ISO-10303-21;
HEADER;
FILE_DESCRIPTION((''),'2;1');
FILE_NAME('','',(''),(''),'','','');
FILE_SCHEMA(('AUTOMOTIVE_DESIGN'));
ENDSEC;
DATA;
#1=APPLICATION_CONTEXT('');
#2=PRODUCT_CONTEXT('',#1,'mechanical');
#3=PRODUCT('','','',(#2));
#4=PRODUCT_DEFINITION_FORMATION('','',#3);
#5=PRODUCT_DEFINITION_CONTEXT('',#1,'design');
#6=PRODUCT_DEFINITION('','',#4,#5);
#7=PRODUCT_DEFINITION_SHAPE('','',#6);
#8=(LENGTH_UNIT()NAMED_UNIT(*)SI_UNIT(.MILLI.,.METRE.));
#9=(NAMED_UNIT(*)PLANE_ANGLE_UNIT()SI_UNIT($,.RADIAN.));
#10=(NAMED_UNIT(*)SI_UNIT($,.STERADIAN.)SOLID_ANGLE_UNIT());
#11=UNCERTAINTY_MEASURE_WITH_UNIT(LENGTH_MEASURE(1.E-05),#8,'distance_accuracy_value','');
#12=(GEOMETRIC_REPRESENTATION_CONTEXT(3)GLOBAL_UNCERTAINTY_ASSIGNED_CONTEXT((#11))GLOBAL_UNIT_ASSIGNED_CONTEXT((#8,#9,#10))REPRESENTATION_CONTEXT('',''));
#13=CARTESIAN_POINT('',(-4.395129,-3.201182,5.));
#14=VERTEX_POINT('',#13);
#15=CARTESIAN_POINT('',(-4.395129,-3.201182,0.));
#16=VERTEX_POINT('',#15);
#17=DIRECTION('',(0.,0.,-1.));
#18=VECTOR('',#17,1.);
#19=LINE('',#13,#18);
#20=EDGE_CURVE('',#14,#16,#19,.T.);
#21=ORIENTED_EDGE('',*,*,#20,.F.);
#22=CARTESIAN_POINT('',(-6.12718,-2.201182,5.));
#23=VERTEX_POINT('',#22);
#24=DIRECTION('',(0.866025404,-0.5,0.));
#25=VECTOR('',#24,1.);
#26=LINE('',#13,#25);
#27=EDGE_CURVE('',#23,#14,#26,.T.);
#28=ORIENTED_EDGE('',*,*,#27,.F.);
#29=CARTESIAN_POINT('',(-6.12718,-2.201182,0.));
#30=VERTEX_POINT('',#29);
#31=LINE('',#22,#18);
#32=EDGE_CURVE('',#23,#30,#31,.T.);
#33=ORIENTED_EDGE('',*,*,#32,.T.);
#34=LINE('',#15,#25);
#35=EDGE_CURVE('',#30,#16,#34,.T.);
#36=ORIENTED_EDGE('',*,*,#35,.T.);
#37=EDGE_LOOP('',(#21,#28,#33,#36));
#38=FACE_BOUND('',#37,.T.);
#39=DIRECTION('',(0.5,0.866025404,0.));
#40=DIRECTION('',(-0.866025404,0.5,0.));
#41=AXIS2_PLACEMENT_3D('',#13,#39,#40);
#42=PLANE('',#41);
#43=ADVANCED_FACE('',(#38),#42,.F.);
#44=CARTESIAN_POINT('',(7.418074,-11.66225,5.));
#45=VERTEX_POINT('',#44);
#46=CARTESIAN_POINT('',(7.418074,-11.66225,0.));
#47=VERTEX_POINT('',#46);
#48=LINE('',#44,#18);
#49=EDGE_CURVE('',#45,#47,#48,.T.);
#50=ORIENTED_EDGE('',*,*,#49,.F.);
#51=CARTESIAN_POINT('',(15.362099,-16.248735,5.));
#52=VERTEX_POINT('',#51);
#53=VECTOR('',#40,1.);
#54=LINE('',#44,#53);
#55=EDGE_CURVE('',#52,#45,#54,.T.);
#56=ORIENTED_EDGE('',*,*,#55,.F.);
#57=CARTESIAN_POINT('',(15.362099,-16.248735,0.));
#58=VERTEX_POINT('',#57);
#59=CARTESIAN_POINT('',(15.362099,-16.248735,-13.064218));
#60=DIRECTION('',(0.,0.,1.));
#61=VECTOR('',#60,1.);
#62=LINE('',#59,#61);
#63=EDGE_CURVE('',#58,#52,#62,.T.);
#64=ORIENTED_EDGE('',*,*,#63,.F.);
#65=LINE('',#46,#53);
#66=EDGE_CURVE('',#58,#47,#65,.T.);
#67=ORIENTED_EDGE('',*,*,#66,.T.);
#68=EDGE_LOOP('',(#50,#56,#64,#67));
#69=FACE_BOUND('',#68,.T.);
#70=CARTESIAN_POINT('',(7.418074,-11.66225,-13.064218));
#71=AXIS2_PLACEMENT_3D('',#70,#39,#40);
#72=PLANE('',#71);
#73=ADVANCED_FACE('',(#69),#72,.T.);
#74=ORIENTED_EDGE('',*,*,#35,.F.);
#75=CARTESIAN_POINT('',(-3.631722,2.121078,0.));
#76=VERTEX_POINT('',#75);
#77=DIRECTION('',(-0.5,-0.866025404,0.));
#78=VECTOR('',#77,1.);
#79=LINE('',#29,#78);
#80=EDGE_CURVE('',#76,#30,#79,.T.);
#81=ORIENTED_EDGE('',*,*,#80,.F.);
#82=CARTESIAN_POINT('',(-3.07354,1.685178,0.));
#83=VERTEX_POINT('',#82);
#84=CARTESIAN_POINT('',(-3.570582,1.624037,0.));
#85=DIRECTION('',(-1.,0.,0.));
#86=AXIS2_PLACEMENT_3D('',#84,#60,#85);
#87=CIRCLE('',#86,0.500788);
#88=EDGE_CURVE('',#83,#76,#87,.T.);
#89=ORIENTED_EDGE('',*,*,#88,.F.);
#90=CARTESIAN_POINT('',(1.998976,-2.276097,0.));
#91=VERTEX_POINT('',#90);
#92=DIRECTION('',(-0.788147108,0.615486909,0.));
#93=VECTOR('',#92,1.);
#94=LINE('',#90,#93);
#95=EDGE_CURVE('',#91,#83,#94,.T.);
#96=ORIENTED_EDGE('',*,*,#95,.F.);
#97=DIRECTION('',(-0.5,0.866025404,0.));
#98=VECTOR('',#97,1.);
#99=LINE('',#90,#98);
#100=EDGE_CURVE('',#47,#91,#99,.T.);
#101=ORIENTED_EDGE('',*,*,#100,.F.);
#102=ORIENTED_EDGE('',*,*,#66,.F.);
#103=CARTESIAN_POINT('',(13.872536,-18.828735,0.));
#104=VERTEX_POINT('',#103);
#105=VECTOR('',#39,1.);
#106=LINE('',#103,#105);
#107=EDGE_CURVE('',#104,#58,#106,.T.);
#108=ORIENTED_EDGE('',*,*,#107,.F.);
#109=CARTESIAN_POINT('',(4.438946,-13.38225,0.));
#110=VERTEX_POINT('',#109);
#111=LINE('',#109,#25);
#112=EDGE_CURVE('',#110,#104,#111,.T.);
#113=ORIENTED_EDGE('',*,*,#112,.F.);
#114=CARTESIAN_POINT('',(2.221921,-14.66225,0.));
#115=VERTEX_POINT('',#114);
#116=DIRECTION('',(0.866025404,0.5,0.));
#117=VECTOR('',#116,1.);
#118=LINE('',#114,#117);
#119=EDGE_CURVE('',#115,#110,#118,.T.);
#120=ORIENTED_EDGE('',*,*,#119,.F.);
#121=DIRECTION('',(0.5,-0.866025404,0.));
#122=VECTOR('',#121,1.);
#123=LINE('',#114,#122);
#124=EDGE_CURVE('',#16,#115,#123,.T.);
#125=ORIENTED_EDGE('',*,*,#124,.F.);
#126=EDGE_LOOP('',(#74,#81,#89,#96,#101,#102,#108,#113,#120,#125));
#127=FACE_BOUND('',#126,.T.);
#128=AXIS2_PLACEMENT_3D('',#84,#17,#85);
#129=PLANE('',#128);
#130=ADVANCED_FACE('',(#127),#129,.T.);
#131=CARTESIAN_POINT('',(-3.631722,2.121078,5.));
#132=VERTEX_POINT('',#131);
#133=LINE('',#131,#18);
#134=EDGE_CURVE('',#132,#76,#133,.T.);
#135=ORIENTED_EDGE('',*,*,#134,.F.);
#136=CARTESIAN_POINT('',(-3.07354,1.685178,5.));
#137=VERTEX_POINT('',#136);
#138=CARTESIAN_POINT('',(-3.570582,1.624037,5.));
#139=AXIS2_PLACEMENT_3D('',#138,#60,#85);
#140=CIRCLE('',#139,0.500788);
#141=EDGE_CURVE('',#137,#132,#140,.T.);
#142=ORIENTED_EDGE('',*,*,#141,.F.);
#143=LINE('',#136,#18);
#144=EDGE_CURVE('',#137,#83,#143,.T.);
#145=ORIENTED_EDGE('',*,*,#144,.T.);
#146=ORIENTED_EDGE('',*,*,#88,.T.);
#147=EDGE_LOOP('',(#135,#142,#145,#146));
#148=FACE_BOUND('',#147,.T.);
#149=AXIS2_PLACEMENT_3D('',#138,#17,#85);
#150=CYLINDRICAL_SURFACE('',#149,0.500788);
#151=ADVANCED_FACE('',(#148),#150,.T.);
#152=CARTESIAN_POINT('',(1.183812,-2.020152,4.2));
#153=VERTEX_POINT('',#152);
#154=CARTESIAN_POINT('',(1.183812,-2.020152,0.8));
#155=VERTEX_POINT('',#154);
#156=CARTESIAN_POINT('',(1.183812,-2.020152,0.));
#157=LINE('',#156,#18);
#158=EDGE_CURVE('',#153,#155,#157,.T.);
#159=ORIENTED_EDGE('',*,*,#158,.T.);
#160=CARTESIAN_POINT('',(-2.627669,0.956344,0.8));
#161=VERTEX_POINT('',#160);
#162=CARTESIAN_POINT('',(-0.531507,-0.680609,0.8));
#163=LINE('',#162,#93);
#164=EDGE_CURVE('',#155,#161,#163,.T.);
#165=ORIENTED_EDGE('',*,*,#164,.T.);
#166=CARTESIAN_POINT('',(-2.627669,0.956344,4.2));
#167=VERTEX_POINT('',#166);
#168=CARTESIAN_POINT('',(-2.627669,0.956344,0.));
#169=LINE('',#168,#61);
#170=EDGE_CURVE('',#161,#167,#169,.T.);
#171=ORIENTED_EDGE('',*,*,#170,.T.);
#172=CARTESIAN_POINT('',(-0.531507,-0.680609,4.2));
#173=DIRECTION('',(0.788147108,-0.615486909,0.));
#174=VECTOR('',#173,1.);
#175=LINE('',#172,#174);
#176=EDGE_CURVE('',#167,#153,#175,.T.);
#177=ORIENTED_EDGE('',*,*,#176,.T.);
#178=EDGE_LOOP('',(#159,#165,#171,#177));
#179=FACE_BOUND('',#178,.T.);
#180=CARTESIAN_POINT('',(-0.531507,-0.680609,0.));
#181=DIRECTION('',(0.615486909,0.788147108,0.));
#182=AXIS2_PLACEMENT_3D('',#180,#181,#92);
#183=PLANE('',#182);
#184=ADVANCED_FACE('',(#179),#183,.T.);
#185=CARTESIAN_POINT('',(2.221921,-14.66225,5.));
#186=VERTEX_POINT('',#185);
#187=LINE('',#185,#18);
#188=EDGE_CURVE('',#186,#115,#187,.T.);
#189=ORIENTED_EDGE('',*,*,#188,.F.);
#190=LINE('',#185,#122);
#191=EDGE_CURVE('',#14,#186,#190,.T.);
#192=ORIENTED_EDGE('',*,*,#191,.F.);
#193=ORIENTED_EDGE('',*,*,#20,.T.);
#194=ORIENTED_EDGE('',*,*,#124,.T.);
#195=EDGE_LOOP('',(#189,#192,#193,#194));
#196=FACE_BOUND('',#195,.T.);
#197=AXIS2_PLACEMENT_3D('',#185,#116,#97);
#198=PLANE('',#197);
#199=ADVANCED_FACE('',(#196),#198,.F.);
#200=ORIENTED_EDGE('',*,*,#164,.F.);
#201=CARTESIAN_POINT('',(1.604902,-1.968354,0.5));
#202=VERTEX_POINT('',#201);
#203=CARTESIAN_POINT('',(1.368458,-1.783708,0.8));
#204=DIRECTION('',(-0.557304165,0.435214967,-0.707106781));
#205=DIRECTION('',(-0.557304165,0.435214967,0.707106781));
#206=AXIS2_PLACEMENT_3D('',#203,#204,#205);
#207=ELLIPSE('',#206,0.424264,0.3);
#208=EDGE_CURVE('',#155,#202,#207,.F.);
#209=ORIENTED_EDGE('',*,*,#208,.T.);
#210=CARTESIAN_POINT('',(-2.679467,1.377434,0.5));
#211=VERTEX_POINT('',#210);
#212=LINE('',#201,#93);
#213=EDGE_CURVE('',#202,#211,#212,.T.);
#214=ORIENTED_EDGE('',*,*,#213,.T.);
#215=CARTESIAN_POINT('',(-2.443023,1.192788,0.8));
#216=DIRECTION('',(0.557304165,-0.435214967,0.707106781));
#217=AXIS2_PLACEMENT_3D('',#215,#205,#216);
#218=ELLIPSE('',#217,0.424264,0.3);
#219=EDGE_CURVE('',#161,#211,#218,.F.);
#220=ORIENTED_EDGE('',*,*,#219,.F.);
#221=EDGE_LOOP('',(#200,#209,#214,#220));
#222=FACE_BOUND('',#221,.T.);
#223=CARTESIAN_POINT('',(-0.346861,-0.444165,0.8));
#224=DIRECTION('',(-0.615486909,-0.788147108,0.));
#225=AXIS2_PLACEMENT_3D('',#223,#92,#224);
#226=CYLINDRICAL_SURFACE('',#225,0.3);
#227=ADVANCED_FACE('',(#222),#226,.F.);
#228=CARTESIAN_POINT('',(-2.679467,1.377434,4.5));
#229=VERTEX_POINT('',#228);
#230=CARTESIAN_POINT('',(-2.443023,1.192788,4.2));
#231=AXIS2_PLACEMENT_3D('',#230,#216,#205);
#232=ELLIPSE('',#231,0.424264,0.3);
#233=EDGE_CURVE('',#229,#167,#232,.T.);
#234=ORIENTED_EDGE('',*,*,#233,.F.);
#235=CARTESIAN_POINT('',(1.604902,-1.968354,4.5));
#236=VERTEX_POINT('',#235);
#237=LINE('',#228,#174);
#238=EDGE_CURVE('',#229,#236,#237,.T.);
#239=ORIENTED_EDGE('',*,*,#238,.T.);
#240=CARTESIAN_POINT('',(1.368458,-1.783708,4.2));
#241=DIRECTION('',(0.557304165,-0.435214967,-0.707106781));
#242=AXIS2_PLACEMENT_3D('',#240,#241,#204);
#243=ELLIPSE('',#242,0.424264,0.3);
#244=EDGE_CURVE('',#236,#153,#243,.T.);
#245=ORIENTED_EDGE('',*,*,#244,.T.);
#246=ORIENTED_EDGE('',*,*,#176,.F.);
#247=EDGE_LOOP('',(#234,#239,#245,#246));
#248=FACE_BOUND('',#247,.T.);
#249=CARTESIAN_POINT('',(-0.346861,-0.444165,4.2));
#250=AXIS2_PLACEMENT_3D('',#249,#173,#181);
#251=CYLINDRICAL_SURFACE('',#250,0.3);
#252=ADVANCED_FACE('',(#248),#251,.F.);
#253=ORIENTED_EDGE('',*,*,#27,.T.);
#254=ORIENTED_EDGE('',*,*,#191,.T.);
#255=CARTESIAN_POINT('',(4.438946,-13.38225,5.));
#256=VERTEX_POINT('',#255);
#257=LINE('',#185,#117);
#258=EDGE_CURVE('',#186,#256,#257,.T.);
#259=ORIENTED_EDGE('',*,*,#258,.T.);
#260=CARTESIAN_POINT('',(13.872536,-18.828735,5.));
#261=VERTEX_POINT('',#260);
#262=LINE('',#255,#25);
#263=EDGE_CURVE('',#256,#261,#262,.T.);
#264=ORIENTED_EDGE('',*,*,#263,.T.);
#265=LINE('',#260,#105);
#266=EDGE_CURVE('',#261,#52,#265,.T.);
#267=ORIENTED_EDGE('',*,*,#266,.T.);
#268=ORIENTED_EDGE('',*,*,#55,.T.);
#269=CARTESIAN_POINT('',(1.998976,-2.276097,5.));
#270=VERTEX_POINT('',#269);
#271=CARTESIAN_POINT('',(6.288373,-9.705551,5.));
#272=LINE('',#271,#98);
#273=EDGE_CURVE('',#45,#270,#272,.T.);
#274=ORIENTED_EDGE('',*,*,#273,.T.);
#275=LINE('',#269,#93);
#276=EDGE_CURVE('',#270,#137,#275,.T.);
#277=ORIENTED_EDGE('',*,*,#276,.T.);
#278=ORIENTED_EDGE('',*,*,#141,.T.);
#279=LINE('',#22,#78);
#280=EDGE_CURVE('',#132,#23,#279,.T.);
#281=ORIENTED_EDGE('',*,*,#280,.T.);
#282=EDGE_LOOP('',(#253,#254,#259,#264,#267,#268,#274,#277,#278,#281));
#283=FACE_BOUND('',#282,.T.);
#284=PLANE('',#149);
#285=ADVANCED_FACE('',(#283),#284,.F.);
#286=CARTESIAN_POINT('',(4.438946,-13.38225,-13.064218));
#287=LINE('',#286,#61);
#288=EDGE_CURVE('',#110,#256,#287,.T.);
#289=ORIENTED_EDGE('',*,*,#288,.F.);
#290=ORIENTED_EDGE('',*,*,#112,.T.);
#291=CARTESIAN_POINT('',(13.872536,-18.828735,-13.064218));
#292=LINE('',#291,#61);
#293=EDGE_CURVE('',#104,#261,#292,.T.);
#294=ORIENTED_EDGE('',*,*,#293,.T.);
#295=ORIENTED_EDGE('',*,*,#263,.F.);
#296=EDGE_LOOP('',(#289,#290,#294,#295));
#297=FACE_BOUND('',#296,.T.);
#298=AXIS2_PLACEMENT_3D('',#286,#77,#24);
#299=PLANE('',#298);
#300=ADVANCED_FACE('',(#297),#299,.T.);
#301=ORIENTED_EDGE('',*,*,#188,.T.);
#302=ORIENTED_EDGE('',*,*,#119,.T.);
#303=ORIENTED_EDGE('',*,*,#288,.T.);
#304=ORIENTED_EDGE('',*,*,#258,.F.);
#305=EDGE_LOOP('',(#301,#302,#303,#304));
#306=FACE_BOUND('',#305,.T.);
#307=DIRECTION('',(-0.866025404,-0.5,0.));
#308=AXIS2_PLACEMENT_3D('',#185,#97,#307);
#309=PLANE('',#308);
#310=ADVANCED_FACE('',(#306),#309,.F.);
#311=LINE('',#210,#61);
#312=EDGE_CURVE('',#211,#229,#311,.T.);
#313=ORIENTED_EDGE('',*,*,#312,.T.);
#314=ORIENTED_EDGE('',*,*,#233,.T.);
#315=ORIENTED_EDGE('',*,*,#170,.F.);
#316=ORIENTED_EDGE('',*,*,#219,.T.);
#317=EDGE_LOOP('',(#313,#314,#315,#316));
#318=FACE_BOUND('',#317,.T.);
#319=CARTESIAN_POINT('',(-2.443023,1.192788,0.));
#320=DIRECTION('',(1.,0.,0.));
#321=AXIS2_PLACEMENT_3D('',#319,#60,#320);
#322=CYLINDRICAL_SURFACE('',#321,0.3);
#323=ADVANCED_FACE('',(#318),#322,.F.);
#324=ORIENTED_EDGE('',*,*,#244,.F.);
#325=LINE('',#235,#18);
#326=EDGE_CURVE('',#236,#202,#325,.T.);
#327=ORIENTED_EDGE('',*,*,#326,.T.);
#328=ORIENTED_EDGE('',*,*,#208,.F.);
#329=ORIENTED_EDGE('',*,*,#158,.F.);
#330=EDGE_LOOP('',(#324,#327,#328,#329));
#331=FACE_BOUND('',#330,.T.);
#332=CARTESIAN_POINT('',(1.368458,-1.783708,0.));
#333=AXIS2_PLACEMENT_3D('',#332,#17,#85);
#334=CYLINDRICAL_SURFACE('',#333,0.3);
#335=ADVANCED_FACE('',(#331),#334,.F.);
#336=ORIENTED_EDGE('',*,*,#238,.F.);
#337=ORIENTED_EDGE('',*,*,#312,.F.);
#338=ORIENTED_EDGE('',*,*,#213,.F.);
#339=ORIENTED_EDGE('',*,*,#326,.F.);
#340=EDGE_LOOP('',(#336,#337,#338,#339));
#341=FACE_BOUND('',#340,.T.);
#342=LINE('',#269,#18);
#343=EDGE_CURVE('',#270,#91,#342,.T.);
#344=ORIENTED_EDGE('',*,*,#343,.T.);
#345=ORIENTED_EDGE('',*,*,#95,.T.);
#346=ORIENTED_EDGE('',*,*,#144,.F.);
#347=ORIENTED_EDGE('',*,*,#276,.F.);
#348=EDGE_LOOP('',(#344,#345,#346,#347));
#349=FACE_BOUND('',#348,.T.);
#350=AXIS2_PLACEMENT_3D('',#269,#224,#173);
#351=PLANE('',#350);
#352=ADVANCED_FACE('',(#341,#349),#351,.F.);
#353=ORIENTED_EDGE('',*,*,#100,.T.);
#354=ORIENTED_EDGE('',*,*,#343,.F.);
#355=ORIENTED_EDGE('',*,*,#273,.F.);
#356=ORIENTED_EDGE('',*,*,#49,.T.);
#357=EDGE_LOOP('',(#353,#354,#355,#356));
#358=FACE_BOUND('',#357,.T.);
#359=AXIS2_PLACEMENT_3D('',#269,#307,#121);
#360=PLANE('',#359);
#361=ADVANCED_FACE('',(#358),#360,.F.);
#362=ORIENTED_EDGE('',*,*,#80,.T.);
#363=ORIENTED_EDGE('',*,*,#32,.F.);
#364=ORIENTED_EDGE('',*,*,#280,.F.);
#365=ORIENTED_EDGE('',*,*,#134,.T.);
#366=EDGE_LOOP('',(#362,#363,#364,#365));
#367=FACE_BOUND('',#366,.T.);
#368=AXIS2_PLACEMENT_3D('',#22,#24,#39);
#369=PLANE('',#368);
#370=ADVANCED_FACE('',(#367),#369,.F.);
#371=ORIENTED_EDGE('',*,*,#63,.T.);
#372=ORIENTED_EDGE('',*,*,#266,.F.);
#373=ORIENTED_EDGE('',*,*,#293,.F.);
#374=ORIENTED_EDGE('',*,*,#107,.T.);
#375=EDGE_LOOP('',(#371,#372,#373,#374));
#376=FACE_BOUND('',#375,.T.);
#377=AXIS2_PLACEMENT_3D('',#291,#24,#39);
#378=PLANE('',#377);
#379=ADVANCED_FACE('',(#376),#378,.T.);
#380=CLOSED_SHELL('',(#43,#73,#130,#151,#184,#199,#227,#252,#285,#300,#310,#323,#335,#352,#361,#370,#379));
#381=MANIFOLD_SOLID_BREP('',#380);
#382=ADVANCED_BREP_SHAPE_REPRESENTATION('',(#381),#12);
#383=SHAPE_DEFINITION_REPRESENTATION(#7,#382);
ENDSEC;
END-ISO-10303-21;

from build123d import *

# Parameters (mm, degrees)
EXTRUDE_1_DEPTH     = 5
SKETCH_2_W          = 5.436001784
SKETCH_2_H          = 4
CUT_EXTRUDE_1_DEPTH = 0.3
FILLET_2_R          = 0.3
EXTRUDE_2_DEPTH     = 5


with BuildPart() as part:
    # 草图1 → 凸台-拉伸1 (new body)
    with BuildSketch(Plane.XY):
        with BuildLine():
            Line((-6.127180226, -2.201181898), (-3.631722259, 2.12107809))
            ThreePointArc((-3.631722259, 2.12107809), (-3.262353303, 2.018731118), (-3.073540248, 1.685177587))
            Line((-3.073540248, 1.685177587), (1.998975947, -2.27609726))
            Line((1.998975947, -2.27609726), (6.288373272, -9.705551361))
            Line((6.288373272, -9.705551361), (7.418073814, -11.662250097))
            Line((7.418073814, -11.662250097), (2.221921391, -14.662250097))
            Line((2.221921391, -14.662250097), (-4.395129419, -3.201181898))
            Line((-4.395129419, -3.201181898), (-6.127180226, -2.201181898))
        make_face()
    extrude(amount=EXTRUDE_1_DEPTH)

    # 草图2 → 切除-拉伸1 (cut)
    with BuildSketch(Plane(origin=(-0.346861308, -0.444164989, 0), x_dir=(0.7881471083112889, -0.6154869094144516, 0), z_dir=(0.6154869094144517, 0.788147108311289, 0))):
        with Locations((-0.241605711, -2.5)):
            Rectangle(SKETCH_2_W, SKETCH_2_H)
    extrude(amount=-CUT_EXTRUDE_1_DEPTH, mode=Mode.SUBTRACT)

    # 圆角2
    fillet_2_edges = [part.edges().sort_by_distance(p)[0] for p in [
        (-2.864112767, 1.14099, 2.5),
        (-0.721928223, -0.531903969, 0.5),
        (1.42025632, -2.204797938, 2.5),
        (-0.721928223, -0.531903969, 4.5),
    ]]
    fillet(fillet_2_edges, radius=FILLET_2_R - 0.0001)  # a hair under: the kernel refuses the full size

    # 草图3 → 凸台-拉伸2 (add)
    with BuildSketch(Plane.XY.offset(5)):
        Polygon((7.418073814, -11.662250097), (15.362099483, -16.248735455), (13.872535789, -18.828735455), (4.438946425, -13.382250097), align=None)
    extrude(amount=-EXTRUDE_2_DEPTH)


solid = part.part
